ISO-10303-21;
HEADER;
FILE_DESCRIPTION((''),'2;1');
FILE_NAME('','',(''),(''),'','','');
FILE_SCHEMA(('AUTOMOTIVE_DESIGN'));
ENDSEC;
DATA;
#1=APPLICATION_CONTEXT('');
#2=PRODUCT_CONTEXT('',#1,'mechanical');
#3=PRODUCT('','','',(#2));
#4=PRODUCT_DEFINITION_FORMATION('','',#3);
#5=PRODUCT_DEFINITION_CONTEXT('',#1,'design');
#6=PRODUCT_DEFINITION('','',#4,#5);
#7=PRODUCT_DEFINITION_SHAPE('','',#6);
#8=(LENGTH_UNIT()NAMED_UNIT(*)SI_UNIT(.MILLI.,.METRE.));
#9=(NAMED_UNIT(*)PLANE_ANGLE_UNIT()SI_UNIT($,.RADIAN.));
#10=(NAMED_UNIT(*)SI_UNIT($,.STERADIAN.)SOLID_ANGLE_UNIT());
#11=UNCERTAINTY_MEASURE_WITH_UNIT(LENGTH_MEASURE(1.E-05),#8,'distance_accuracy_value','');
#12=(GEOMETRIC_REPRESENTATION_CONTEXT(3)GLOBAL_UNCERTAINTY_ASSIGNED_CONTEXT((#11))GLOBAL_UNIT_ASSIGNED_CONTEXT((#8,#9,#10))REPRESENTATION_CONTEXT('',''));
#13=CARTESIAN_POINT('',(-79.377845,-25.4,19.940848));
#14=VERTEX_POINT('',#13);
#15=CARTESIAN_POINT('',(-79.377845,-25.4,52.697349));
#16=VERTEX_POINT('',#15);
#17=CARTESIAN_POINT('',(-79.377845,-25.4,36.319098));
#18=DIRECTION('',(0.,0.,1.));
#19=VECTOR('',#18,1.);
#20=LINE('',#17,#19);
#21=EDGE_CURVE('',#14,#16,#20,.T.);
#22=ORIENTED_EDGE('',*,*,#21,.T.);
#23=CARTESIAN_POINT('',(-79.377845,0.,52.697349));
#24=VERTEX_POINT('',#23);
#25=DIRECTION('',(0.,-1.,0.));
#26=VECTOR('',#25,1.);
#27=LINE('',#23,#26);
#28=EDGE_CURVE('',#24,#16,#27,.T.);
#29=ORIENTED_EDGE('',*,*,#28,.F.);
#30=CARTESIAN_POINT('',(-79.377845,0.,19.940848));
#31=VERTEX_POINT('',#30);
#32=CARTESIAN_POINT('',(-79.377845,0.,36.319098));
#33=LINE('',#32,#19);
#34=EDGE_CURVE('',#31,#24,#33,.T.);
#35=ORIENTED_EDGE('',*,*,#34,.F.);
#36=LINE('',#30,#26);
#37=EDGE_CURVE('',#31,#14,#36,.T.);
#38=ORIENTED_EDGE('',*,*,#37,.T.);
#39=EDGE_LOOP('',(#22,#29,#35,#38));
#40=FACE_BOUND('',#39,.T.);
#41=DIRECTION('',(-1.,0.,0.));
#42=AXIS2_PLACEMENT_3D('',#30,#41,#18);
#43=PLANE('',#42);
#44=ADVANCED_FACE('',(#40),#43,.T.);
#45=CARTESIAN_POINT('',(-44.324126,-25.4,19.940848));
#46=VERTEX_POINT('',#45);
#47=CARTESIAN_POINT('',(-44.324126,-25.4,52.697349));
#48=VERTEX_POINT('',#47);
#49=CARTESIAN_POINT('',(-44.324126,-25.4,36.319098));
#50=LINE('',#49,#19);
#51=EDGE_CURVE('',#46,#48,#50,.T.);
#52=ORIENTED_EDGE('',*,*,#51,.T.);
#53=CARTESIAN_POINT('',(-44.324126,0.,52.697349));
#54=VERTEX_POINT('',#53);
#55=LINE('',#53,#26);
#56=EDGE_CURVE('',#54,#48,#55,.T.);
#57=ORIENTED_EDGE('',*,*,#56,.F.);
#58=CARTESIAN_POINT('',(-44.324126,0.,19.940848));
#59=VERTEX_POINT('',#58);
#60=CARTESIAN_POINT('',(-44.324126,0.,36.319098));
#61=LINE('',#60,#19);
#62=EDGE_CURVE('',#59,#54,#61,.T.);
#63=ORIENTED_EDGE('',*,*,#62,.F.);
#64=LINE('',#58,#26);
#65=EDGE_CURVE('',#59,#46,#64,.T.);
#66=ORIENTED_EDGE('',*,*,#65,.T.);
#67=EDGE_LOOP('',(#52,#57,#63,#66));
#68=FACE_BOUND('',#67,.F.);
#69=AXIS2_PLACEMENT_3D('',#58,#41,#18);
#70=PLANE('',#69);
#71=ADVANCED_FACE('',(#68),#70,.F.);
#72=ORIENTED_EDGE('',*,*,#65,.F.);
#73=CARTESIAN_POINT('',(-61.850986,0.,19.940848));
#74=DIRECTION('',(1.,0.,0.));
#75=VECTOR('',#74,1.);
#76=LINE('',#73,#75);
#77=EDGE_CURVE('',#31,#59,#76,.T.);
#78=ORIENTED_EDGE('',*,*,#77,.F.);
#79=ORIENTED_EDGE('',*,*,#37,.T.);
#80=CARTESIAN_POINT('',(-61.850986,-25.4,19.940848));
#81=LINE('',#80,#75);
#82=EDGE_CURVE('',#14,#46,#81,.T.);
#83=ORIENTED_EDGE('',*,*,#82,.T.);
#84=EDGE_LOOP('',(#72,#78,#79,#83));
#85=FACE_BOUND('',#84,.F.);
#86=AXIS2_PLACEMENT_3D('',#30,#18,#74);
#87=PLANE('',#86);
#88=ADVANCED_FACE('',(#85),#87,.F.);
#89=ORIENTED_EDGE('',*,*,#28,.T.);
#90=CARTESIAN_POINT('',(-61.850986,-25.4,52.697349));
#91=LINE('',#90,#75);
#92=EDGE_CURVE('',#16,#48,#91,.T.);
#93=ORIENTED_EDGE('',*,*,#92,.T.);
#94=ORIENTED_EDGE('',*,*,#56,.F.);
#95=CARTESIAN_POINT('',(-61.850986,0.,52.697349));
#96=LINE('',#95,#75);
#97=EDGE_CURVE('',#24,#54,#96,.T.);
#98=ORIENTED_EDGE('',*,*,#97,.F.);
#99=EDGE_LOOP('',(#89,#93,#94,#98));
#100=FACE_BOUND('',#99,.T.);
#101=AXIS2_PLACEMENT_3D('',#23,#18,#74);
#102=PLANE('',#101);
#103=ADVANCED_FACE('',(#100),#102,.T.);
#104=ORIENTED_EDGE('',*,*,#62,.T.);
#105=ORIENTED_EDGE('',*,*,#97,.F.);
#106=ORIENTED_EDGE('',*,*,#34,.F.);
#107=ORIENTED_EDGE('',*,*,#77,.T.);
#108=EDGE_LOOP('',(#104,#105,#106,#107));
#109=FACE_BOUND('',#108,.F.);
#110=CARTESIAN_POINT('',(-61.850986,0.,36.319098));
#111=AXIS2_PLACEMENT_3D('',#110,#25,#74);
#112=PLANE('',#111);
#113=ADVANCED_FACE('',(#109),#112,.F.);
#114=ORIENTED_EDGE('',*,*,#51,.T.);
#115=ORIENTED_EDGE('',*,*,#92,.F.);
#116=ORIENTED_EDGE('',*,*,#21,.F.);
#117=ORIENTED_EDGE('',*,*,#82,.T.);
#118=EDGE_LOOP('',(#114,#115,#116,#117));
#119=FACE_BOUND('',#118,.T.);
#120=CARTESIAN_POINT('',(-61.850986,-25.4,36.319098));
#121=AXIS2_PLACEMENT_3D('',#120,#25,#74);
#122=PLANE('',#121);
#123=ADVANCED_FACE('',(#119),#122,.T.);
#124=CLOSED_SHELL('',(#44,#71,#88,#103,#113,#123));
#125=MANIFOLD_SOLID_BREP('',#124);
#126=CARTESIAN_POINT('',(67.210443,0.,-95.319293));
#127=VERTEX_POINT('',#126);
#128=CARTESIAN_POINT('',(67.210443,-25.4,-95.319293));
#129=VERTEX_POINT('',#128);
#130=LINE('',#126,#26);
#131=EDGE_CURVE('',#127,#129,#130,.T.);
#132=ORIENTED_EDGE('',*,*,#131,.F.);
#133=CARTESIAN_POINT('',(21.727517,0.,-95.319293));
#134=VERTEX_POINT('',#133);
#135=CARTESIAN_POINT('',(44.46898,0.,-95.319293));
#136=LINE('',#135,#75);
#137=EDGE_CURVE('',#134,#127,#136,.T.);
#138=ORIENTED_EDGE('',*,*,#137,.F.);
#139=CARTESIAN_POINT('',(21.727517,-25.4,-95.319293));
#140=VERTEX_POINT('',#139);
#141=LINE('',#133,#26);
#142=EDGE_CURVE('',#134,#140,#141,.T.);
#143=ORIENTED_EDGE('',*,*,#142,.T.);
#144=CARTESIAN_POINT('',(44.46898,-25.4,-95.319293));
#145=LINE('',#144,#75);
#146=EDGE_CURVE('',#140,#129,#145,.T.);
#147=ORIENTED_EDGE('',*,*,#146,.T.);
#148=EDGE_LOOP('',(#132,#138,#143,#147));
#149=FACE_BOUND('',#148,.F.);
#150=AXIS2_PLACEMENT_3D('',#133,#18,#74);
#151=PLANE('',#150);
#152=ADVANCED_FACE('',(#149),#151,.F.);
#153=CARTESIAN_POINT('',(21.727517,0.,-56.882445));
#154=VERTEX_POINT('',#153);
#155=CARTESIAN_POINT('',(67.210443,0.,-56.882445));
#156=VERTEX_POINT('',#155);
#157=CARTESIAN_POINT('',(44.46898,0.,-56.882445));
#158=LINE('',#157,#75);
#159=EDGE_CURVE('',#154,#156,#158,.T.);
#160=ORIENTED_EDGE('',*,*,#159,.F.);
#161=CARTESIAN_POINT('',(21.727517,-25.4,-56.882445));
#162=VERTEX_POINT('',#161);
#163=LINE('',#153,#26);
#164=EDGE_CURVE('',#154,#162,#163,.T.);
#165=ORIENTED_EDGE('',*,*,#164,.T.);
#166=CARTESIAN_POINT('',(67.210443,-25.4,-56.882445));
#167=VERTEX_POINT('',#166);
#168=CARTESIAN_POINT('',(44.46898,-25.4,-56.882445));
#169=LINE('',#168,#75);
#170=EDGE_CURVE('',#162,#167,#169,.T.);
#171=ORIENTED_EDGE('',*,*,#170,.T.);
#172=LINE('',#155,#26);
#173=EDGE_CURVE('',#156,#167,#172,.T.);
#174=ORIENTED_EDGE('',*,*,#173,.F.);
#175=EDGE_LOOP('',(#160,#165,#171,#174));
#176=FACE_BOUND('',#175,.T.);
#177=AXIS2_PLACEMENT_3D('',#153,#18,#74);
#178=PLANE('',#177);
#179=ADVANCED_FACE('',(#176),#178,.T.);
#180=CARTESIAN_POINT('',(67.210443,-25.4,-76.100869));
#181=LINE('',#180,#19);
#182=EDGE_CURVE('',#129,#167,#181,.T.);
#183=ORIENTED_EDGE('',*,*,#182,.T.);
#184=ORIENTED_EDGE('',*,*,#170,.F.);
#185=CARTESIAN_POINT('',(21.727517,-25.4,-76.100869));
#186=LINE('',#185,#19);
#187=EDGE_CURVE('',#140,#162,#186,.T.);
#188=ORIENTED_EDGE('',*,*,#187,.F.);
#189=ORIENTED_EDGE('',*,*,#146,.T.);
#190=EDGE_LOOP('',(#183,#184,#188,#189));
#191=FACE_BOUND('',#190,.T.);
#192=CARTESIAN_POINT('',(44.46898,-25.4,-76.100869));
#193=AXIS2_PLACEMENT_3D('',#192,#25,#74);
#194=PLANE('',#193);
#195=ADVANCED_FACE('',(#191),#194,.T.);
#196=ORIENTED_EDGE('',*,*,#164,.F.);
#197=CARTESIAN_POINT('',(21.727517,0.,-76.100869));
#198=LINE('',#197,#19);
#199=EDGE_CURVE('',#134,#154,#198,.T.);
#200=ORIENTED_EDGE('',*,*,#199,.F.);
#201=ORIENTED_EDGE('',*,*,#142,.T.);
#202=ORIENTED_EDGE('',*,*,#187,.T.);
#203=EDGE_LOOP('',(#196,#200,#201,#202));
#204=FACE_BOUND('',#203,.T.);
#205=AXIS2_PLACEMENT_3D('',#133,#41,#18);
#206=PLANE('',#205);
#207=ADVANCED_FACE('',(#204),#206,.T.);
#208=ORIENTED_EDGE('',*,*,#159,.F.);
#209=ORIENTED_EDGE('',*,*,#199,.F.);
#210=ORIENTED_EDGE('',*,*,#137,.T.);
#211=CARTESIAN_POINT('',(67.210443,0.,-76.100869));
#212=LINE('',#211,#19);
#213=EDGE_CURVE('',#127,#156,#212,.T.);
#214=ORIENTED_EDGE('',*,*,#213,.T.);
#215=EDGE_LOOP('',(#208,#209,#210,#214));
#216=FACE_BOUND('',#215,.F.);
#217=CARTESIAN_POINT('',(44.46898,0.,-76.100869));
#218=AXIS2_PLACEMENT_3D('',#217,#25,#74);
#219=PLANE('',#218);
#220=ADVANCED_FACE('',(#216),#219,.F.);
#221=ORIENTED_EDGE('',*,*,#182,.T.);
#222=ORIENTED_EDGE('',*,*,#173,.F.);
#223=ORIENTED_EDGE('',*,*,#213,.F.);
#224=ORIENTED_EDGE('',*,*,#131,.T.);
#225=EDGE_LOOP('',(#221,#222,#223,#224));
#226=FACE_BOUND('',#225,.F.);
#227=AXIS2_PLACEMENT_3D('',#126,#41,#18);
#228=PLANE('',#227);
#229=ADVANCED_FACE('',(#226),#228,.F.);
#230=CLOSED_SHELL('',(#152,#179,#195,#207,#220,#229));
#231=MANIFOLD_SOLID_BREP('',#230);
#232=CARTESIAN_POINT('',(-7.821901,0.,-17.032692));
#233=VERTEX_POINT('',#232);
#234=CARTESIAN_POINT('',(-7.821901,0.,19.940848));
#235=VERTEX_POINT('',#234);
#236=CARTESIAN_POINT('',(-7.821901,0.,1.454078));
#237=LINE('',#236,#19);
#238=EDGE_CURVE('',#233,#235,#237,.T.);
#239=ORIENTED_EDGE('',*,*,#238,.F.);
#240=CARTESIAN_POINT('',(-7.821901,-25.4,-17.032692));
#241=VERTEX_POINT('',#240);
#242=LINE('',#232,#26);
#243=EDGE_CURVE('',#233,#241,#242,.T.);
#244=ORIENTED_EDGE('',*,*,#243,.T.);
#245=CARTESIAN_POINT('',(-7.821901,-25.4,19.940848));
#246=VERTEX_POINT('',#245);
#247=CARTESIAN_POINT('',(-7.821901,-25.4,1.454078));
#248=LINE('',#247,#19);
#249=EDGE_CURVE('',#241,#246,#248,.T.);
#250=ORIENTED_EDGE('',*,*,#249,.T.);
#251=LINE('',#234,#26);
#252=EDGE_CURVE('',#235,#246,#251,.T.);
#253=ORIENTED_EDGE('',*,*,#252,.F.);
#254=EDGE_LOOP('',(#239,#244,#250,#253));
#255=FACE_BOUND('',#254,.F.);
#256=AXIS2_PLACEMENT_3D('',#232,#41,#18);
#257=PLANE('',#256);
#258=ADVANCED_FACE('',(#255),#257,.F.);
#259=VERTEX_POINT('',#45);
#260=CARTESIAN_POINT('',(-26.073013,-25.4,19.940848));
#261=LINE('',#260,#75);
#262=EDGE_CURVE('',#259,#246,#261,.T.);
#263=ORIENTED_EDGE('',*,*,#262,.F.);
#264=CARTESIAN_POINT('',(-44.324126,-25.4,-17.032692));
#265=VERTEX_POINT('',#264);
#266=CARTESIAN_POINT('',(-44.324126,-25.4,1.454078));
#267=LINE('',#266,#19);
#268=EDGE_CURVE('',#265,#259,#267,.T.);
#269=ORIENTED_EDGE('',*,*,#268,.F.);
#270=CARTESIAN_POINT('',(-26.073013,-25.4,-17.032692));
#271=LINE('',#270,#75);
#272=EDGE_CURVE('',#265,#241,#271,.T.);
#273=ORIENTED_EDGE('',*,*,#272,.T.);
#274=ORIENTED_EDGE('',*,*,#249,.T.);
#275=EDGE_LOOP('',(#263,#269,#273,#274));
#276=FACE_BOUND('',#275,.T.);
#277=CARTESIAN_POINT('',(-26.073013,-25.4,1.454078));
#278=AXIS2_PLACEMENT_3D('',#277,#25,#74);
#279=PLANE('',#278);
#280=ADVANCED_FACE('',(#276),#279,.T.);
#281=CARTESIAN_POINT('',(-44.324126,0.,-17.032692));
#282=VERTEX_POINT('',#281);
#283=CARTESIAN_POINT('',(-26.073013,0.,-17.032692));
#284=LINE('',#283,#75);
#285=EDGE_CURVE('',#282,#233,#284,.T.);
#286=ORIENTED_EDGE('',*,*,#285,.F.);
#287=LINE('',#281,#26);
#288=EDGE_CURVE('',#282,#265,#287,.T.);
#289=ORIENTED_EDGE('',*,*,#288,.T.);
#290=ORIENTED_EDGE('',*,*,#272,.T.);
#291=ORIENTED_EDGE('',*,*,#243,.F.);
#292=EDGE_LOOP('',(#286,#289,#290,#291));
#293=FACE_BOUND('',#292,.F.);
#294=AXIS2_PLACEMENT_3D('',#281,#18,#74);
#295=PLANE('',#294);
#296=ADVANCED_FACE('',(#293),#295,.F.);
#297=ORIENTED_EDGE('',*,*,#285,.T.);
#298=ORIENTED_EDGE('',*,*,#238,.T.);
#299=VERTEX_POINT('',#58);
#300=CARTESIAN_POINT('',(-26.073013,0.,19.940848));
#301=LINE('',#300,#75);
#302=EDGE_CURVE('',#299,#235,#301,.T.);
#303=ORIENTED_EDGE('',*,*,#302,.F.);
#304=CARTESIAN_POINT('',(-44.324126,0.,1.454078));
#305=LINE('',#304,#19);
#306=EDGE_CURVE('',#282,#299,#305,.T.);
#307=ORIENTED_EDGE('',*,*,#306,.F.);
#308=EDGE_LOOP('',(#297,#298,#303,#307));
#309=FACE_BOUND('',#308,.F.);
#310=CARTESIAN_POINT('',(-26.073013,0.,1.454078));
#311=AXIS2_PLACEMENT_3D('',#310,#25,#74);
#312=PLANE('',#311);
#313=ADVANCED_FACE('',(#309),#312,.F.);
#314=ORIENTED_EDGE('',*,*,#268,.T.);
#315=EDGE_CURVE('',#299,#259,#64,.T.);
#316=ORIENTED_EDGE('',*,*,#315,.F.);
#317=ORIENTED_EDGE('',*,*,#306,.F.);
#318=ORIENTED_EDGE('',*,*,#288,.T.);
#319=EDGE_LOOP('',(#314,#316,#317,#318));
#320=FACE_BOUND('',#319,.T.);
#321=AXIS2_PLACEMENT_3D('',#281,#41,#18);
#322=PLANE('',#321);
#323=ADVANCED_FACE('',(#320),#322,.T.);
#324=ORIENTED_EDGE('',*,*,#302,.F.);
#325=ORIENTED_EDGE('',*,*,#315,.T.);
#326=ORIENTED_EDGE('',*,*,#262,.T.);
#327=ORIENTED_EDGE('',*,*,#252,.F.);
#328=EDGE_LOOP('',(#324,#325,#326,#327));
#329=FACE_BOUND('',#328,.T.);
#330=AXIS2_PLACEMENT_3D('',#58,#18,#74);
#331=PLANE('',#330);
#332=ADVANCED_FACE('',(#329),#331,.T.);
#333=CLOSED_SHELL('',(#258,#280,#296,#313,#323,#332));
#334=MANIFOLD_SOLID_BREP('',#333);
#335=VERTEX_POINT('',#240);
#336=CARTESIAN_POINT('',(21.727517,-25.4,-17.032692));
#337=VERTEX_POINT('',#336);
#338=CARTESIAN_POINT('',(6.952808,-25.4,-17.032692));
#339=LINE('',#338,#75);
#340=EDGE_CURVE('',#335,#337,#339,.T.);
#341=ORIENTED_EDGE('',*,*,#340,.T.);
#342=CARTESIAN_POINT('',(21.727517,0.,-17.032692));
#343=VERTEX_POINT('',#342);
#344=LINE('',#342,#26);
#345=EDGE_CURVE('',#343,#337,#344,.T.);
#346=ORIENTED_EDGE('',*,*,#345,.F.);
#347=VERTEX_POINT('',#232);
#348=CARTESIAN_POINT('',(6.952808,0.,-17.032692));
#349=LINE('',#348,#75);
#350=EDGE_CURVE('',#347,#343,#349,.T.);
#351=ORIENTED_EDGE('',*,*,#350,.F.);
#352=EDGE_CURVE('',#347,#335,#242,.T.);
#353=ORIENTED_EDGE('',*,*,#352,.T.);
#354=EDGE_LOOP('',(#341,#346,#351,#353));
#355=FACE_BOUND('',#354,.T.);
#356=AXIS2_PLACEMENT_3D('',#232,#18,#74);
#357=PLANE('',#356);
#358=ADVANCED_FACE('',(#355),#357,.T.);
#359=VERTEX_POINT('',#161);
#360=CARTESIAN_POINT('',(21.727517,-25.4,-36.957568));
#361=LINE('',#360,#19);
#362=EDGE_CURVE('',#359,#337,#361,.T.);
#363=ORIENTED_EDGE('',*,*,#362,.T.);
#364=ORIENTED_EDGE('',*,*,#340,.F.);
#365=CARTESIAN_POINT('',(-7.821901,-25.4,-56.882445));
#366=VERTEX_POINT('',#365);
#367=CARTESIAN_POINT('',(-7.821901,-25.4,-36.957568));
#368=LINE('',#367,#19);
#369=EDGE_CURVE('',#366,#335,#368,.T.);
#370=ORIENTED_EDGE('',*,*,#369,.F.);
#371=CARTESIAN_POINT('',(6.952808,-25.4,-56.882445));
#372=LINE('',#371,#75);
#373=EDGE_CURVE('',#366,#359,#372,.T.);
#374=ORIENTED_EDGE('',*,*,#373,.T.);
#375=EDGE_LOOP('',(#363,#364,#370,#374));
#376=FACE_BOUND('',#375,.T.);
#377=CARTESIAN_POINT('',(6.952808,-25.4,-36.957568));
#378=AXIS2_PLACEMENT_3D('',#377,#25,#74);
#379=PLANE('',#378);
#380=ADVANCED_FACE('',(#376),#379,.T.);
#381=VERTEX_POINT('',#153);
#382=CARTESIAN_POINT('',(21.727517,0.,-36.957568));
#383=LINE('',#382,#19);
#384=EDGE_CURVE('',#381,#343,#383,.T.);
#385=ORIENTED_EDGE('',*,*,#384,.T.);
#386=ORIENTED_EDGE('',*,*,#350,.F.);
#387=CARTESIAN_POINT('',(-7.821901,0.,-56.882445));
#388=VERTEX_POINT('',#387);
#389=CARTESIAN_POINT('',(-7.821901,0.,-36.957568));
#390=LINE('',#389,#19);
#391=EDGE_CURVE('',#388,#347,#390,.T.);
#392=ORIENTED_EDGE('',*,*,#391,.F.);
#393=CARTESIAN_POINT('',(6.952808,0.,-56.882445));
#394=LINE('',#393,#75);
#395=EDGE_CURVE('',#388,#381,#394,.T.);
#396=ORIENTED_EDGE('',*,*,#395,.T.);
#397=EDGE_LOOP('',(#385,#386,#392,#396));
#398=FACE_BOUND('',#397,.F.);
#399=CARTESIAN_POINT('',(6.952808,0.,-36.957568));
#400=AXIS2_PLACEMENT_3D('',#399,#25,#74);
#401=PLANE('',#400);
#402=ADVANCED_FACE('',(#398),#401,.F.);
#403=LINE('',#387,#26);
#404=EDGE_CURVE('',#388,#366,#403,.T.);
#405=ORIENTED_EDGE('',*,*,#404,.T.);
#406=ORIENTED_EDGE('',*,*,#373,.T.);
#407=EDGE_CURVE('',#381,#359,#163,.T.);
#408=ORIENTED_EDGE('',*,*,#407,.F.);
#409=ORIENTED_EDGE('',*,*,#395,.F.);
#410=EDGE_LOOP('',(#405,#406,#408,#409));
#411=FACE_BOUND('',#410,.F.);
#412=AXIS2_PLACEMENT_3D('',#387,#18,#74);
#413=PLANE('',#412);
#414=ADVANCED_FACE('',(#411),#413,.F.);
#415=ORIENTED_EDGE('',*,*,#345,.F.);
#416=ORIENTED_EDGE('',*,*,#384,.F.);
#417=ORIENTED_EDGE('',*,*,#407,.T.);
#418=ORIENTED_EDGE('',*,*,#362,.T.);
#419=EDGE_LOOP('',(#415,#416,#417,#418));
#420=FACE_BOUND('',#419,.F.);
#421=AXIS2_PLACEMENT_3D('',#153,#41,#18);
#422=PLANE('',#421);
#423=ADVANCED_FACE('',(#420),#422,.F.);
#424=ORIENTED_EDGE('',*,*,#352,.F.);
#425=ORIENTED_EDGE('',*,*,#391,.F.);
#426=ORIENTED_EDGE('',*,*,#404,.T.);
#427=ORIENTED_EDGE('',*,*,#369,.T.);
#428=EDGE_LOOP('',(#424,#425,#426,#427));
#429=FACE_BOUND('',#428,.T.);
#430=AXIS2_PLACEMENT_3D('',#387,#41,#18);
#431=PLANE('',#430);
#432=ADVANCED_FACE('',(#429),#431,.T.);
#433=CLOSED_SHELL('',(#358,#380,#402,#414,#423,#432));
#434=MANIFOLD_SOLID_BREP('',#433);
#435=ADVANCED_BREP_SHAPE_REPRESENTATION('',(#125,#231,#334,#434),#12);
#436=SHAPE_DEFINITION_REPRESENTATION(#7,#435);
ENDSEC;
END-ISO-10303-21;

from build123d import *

# Parameters (mm, degrees)
F0_W     = 45.4829260707
F0_H     = 38.4368486702
F1_DEPTH = 25.4
F0_W_2   = 29.5494180173
F0_H_2   = 39.8497525603
F0_W_3   = 36.5022253245
F0_H_3   = 36.9735397398
F0_W_4   = 35.0537188351
F0_H_4   = 32.7565018088


# Not quite as in the source:
# - a feature of the source that left no trace in its solid (it failed there, or was rolled back) is left out


with BuildPart() as f1:
    # F0 (on Front) → F1 (new body)
    with BuildSketch(Plane.XZ):
        with Locations((44.4689802825, -76.1008691043)):
            Rectangle(F0_W, F0_H)
    extrude(amount=F1_DEPTH)


with BuildPart() as f1b:
    # F0 (on Front) → F1, piece 2 (new body)
    with BuildSketch(Plane.XZ):
        with Locations((6.9528082386, -36.957568489)):
            Rectangle(F0_W_2, F0_H_2)
    extrude(amount=F1_DEPTH)


with BuildPart() as f1c:
    # F0 (on Front) → F1, piece 3 (new body)
    with BuildSketch(Plane.XZ):
        with Locations((-26.0730134323, 1.454077661)):
            Rectangle(F0_W_3, F0_H_3)
    extrude(amount=F1_DEPTH)


with BuildPart() as f1d:
    # F0 (on Front) → F1, piece 4 (new body)
    with BuildSketch(Plane.XZ):
        with Locations((-61.8509855121, 36.3190984353)):
            Rectangle(F0_W_4, F0_H_4)
    extrude(amount=F1_DEPTH)


solid = Compound([f1.part, f1b.part, f1c.part, f1d.part])
